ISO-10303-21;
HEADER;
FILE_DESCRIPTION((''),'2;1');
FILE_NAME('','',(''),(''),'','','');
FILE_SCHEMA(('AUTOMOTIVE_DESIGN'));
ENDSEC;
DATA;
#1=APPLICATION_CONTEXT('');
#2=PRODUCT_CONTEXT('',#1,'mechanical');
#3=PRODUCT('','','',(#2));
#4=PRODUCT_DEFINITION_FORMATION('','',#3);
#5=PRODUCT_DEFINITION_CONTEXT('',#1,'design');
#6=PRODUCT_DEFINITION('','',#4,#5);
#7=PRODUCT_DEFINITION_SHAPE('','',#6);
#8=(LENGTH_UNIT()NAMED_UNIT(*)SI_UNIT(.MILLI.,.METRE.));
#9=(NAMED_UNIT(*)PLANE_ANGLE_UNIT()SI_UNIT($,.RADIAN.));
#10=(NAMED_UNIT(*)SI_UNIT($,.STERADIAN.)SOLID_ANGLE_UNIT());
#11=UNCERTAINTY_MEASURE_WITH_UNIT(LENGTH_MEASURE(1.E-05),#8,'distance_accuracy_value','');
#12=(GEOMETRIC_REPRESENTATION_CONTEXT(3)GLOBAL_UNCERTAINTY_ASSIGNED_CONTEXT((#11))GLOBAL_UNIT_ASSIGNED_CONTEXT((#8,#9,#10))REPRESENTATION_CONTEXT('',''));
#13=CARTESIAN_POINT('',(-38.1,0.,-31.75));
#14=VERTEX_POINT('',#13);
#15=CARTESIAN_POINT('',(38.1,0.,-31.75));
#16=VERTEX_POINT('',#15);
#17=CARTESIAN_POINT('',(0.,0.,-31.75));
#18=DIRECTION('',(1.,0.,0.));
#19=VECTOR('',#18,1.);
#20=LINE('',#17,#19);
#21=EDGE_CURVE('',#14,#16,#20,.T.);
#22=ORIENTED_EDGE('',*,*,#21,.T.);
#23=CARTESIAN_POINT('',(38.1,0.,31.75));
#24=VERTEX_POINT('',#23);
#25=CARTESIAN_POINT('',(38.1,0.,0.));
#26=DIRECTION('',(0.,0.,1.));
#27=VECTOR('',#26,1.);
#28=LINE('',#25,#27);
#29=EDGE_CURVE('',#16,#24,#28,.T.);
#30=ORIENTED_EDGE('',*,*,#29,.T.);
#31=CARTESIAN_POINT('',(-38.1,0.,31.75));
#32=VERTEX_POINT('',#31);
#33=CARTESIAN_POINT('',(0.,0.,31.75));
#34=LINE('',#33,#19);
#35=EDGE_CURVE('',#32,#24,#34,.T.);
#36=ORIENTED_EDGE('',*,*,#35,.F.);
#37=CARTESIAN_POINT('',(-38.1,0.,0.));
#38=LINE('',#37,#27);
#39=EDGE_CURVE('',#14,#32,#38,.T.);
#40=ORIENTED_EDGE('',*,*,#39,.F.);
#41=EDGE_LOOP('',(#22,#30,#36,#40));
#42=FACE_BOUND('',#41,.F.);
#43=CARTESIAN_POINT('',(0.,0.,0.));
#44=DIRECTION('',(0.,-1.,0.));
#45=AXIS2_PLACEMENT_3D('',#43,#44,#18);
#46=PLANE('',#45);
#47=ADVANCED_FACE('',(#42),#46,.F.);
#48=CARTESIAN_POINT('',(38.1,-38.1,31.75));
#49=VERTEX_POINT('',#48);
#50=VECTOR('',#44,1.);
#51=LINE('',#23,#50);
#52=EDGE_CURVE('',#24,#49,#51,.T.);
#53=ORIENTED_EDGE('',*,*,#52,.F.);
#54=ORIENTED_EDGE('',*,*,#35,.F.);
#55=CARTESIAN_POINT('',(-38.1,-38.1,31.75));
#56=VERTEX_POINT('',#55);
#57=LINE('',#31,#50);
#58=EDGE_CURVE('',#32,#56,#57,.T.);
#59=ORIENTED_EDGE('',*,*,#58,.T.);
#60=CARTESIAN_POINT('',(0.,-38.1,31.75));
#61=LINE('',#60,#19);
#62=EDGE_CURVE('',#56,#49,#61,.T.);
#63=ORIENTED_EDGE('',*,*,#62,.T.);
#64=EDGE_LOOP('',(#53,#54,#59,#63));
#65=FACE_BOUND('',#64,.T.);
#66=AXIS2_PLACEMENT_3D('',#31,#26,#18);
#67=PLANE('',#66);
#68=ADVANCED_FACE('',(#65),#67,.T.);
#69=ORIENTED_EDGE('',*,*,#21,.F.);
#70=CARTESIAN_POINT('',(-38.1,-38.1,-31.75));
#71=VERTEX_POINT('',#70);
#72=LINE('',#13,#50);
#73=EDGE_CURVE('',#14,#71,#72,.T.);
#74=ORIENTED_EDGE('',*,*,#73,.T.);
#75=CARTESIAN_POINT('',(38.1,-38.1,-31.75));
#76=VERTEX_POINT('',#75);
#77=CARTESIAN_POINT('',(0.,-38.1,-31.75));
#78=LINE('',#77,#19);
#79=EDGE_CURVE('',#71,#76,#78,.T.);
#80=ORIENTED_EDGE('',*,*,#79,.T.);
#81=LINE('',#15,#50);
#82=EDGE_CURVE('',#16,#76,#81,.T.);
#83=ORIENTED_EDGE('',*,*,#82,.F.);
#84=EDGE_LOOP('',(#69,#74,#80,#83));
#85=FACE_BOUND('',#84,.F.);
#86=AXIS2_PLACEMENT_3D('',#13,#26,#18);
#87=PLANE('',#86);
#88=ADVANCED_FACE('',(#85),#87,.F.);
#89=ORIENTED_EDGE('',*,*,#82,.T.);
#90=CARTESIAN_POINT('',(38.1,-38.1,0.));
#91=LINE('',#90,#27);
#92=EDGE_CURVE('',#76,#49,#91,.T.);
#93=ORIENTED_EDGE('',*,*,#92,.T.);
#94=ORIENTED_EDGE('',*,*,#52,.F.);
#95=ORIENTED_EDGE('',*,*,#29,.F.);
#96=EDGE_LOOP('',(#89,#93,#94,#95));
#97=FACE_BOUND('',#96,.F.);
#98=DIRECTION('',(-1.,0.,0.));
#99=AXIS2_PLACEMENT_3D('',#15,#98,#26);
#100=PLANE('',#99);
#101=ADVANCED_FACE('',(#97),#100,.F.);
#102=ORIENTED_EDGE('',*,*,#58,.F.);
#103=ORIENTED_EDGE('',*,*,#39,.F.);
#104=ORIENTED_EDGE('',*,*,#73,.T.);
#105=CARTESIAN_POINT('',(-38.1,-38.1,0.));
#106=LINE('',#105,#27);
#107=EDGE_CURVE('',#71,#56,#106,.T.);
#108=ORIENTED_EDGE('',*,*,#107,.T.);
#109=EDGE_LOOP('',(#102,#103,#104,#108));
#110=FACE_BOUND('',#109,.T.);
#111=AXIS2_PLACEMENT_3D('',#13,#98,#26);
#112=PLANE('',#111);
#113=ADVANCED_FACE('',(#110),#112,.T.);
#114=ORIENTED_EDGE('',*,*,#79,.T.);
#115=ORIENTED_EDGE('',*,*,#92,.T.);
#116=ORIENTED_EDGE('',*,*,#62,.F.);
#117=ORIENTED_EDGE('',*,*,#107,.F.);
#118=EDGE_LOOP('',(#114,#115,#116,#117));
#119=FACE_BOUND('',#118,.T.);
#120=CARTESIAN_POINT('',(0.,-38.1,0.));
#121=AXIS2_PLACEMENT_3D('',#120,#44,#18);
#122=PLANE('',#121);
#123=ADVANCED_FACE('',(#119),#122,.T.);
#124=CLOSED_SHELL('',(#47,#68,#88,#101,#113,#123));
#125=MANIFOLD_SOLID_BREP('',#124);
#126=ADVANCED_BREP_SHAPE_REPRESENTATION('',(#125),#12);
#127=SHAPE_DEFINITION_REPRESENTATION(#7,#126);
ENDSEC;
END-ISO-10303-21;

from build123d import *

# Parameters (mm, degrees)
F0_W     = 76.2
F0_H     = 63.5
F1_DEPTH = 38.1


# Not quite as in the source:
# - the program builds the solid bodies; features that only make, move or delete a surface that nothing else refers to are left out


with BuildPart() as f1:
    # F0 (on Front) → F1 (new body)
    with BuildSketch(Plane.XZ):
        Rectangle(F0_W, F0_H)
    extrude(amount=F1_DEPTH)


solid = f1.part
